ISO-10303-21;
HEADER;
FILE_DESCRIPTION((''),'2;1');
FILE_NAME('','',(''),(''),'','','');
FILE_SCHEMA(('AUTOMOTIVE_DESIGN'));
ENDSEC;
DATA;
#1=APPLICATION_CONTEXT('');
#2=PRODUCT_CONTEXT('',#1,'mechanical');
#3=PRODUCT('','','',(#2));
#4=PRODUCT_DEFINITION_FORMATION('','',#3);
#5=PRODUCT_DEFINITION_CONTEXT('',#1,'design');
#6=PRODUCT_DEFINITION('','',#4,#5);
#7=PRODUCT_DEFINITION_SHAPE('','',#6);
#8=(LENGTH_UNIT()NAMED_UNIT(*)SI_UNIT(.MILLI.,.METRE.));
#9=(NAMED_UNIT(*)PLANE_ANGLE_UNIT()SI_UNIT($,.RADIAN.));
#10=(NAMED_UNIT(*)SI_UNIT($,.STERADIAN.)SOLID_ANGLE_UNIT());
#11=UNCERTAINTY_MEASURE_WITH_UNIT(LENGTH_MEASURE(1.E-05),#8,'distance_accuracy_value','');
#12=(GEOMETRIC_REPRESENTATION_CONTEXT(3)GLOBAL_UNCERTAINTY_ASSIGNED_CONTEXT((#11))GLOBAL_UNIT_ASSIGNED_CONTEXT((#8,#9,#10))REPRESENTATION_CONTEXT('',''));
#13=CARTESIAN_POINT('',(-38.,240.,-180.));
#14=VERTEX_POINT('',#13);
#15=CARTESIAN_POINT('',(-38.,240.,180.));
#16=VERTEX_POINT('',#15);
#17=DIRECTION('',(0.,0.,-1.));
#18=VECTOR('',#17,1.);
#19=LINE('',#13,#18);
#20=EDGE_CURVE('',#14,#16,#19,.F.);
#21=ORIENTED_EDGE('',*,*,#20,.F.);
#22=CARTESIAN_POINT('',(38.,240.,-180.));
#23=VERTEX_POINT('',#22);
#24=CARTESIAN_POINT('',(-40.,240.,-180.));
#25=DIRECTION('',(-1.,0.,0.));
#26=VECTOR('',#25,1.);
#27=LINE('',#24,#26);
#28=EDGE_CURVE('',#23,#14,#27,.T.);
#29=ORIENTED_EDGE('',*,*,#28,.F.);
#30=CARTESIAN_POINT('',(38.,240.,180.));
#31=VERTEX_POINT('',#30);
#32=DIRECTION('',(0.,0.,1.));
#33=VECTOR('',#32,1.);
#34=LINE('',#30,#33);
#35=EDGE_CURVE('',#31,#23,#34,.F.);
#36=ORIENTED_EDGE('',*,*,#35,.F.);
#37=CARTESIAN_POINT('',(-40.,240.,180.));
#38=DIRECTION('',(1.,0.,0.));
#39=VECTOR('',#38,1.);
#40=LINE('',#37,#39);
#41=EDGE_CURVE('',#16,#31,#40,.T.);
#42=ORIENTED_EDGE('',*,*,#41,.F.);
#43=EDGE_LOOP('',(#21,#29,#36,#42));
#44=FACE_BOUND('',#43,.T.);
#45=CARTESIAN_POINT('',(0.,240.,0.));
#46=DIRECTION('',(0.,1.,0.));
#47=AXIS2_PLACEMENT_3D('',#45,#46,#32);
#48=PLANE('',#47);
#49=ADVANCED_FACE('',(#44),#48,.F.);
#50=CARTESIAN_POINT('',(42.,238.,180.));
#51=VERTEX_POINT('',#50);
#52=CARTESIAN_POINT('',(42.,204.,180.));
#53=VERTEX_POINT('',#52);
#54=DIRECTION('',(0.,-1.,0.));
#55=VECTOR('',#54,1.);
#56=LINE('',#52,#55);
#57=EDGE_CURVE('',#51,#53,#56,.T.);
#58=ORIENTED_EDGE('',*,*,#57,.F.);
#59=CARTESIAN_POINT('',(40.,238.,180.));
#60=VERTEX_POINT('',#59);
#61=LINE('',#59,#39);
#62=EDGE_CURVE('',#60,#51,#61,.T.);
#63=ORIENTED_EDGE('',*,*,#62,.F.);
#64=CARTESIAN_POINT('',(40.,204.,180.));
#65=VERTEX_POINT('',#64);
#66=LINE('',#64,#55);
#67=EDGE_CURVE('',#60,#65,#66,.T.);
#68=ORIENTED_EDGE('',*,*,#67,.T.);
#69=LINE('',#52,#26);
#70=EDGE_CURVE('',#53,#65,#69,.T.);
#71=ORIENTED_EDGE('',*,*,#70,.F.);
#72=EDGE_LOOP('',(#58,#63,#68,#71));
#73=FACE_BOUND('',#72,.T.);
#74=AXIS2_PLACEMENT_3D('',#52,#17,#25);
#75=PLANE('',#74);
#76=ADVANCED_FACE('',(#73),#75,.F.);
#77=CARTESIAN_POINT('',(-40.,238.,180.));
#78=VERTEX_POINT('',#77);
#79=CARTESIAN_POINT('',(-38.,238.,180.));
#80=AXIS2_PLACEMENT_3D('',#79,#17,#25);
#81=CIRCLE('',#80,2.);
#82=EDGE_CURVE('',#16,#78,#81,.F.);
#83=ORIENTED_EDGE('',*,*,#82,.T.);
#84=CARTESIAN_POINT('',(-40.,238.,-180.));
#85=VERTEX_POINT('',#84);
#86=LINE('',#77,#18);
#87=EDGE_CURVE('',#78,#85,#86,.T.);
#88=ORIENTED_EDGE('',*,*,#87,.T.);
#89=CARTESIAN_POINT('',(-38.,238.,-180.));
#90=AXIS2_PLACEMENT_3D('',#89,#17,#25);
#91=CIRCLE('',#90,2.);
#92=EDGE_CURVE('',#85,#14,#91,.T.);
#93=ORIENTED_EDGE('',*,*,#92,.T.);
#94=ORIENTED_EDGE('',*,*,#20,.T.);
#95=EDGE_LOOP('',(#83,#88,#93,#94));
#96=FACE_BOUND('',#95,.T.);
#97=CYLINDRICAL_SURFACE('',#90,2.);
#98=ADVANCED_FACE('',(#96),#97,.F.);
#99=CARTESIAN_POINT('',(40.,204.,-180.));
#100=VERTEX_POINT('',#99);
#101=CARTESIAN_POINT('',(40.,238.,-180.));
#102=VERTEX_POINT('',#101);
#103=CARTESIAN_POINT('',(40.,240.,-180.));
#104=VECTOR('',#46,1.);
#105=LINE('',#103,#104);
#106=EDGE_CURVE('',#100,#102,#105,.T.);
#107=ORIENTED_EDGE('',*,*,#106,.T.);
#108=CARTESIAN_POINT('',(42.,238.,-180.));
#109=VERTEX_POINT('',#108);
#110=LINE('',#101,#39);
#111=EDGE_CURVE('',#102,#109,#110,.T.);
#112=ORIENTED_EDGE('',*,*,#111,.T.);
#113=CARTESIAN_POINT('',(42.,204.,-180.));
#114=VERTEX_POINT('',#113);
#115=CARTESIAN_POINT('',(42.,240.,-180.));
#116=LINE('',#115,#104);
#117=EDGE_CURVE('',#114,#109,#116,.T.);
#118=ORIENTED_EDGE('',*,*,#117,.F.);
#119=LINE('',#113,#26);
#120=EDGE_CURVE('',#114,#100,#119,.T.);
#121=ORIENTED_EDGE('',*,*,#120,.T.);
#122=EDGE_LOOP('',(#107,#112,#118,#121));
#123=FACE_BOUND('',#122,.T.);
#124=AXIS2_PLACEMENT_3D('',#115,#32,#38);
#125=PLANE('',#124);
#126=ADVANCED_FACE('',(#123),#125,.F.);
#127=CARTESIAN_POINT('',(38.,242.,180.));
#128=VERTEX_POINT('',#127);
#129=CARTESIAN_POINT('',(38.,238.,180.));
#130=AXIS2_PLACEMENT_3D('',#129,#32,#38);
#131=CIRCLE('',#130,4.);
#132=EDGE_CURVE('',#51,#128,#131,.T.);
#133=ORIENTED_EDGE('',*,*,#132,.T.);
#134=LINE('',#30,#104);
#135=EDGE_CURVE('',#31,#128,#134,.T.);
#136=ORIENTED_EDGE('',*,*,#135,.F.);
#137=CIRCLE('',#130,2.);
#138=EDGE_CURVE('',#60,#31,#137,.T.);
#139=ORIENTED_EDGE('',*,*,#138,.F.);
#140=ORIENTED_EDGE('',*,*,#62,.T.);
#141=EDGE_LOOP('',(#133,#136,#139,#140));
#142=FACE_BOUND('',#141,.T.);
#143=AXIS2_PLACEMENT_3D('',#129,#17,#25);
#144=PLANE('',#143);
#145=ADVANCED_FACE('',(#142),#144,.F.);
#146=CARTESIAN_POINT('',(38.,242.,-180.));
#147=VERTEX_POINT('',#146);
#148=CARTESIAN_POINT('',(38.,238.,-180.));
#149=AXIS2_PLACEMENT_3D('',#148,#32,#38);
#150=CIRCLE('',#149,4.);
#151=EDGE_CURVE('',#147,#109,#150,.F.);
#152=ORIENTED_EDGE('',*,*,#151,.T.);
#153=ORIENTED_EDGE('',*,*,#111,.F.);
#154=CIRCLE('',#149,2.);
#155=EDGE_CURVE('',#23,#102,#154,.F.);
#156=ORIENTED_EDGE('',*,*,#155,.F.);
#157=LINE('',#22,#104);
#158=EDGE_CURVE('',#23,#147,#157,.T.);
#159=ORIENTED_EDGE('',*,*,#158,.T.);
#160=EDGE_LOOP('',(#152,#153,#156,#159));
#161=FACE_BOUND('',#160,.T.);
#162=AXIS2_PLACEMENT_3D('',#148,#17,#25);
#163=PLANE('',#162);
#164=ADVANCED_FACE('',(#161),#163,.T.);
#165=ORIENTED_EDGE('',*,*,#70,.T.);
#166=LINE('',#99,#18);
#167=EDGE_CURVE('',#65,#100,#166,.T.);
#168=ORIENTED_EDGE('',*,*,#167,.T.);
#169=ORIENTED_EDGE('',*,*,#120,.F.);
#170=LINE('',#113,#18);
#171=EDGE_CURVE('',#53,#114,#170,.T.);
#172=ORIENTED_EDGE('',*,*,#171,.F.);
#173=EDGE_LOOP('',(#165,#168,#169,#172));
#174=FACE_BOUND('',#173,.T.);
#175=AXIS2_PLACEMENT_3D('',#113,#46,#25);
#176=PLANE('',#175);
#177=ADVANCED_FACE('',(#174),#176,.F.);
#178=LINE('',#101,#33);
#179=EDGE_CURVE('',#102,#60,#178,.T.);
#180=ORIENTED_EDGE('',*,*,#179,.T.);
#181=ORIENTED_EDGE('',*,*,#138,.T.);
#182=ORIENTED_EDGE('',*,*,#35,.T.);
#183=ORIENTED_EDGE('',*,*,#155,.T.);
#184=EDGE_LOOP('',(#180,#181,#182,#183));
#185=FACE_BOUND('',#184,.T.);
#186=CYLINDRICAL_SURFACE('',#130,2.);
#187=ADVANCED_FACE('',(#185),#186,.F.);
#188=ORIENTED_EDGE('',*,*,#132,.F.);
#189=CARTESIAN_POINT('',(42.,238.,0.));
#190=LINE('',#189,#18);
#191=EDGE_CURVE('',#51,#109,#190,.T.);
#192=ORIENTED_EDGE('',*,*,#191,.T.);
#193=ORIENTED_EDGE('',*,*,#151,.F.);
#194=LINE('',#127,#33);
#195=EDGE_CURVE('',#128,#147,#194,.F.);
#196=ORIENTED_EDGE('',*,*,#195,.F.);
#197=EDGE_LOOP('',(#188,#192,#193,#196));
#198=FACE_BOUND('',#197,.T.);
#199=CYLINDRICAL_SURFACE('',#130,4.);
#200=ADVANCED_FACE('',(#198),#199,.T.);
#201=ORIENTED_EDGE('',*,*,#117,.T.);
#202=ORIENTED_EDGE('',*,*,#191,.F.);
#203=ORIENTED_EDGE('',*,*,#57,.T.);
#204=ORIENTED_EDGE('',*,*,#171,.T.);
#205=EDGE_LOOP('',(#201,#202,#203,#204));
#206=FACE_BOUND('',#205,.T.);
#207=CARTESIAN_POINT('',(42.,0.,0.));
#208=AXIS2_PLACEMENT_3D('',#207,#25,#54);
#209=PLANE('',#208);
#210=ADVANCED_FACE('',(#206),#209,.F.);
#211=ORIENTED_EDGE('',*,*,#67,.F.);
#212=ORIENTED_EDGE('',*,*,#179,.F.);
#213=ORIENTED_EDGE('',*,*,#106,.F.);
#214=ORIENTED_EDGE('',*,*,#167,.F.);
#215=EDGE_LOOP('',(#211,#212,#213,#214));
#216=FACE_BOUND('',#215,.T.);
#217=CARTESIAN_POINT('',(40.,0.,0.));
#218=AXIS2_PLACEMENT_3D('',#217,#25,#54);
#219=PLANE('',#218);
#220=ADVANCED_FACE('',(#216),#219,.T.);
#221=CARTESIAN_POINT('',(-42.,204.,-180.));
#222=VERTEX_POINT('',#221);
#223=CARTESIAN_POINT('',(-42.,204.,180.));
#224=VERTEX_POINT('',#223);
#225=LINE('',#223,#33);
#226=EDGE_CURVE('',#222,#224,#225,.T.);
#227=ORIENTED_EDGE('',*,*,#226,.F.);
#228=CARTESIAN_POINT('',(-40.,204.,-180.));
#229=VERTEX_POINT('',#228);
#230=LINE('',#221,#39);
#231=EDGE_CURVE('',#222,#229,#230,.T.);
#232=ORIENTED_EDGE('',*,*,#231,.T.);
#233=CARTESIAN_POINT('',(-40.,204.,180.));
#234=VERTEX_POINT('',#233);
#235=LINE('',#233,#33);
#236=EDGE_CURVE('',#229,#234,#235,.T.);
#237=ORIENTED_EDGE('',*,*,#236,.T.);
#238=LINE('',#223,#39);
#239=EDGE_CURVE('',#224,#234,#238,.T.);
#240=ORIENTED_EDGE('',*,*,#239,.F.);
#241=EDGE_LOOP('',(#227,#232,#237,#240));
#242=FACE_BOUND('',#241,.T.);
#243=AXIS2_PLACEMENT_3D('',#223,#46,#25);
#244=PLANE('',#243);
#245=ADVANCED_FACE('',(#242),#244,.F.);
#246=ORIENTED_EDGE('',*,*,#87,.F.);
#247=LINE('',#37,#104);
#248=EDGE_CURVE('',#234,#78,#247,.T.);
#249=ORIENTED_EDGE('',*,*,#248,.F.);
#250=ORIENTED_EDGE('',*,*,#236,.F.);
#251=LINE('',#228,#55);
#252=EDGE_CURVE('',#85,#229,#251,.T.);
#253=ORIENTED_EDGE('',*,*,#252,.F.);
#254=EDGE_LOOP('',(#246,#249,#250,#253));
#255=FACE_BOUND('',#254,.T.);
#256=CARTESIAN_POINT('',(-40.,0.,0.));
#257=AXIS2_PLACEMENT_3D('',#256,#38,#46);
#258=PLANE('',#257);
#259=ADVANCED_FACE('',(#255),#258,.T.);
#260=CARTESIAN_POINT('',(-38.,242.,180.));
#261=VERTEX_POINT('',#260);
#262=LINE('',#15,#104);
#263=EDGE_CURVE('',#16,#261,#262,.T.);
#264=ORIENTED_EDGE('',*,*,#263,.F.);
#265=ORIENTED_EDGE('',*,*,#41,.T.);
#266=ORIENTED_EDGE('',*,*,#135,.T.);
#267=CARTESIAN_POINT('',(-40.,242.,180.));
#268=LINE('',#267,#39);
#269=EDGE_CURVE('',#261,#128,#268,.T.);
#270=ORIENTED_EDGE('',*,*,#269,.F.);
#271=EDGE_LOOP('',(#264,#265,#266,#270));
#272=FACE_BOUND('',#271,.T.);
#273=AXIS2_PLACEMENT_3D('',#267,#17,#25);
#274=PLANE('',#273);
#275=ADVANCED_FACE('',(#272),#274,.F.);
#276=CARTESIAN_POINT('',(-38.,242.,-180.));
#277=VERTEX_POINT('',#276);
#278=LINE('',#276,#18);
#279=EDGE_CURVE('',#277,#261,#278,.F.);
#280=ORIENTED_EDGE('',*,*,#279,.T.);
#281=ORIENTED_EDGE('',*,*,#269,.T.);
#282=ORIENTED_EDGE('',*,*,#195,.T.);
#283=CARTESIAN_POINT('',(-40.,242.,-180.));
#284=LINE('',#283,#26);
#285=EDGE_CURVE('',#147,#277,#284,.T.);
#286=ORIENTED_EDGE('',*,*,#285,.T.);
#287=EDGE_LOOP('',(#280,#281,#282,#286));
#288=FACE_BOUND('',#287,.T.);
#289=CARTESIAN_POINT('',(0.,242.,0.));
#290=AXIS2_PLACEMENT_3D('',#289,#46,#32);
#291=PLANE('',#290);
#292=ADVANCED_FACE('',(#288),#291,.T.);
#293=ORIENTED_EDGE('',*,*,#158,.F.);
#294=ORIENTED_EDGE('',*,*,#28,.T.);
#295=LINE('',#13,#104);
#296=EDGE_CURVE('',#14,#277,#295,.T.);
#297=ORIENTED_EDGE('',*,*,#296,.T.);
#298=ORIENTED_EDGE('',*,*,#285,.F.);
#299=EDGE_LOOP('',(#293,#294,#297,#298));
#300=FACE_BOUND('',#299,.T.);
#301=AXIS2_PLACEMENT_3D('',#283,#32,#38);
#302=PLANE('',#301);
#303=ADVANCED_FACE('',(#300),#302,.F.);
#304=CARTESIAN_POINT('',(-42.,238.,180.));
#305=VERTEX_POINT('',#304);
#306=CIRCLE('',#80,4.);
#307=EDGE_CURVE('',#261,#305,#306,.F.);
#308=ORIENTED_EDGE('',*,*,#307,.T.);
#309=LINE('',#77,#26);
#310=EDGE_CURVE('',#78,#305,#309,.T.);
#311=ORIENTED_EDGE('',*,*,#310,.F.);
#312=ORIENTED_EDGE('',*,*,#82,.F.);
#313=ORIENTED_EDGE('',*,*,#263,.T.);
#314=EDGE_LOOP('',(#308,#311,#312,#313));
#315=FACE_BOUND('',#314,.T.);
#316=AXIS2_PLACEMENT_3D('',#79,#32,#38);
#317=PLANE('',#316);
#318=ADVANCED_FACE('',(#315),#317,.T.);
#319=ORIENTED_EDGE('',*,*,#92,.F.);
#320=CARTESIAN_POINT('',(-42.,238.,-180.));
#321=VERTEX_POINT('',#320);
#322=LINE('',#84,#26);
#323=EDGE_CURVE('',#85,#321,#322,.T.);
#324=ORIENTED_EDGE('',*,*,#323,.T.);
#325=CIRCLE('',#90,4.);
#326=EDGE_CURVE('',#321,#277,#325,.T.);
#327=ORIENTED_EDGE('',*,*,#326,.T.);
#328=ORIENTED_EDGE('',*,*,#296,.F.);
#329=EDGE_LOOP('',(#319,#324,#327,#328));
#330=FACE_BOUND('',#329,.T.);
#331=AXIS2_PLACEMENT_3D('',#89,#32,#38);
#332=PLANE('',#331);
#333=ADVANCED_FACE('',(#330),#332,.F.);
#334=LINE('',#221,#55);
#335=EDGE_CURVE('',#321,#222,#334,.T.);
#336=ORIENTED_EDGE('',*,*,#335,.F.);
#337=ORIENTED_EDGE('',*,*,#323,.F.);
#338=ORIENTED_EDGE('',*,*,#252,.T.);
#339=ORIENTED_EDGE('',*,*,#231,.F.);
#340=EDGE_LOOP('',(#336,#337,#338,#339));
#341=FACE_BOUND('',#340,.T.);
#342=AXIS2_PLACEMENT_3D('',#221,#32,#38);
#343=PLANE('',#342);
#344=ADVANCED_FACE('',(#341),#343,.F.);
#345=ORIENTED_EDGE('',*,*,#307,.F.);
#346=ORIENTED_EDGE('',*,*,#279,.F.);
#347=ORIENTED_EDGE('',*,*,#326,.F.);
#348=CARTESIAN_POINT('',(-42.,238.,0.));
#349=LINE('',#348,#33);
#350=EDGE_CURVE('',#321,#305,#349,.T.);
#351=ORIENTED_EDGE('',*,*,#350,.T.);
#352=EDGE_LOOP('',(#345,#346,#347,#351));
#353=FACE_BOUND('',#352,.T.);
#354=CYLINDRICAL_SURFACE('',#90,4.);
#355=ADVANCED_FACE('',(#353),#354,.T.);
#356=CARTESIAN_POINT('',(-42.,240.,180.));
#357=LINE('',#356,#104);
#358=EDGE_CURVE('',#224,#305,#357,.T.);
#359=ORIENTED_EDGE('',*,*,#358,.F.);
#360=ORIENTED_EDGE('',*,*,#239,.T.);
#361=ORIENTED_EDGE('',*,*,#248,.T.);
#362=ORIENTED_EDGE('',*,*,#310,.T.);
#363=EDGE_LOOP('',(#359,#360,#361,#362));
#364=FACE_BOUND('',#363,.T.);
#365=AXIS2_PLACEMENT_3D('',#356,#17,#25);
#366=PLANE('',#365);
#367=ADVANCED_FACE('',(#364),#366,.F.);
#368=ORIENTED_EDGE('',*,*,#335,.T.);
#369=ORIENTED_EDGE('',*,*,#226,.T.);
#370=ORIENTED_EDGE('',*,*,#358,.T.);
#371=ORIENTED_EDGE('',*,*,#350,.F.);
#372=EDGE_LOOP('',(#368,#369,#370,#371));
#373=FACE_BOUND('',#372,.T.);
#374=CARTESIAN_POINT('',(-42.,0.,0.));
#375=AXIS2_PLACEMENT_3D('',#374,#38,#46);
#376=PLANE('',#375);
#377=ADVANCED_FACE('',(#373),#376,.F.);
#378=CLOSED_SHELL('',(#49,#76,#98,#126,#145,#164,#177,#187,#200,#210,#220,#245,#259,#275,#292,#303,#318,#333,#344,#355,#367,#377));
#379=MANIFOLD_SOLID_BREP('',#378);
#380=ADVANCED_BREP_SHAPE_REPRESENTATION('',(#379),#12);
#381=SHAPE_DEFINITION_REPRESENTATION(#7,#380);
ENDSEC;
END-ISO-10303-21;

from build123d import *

# Parameters (mm, degrees)
SKETCH1_W                      = 80
SKETCH1_H                      = 360
BASE_FLANGE1_DEPTH             = 2
EDGE_FLANGE1_STRIP_W           = 12
EDGE_FLANGE1_STRIP_H           = 2
EDGE_FLANGE1_STRIP_CUT_DEPTH   = 360
EDGE_FLANGE1_STRIP_2_W         = 12
EDGE_FLANGE1_STRIP_2_H         = 2
EDGE_FLANGE1_STRIP_CUT_2_DEPTH = 360
EDGE_FLANGE1_DEPTH             = 360
EDGE_FLANGE1_BEND_DEPTH        = 360


# Sheet-metal steps are written as plain solids
with BuildPart() as part:
    # Sketch1 → Base-Flange1 (new body)
    with BuildSketch(Plane(origin=(0, 240, 0), x_dir=(1, 0, 0), z_dir=(0, 1, 0))):
        Rectangle(SKETCH1_W, SKETCH1_H)
    extrude(amount=BASE_FLANGE1_DEPTH)

    # Edge-Flange1 strip (across the edge) → Edge-Flange1 strip cut (cut)
    with BuildSketch(Plane(origin=(40, 240, -180), x_dir=(-1, 0, 0), z_dir=(0, 0, 1))):
        with Locations((-4, -1)):
            Rectangle(EDGE_FLANGE1_STRIP_W, EDGE_FLANGE1_STRIP_H)
    extrude(amount=EDGE_FLANGE1_STRIP_CUT_DEPTH, mode=Mode.SUBTRACT)

    # Edge-Flange1 strip 2 (across the edge) → Edge-Flange1 strip cut 2 (cut)
    with BuildSketch(Plane(origin=(-40, 240, 180), x_dir=(1, 0, 0), z_dir=(0, 0, -1))):
        with Locations((-4, -1)):
            Rectangle(EDGE_FLANGE1_STRIP_2_W, EDGE_FLANGE1_STRIP_2_H)
    extrude(amount=EDGE_FLANGE1_STRIP_CUT_2_DEPTH, mode=Mode.SUBTRACT)

    # Edge-Flange1 section (across the edge) → Edge-Flange1 (add)
    with BuildSketch(Plane(origin=(40, 240, -180), x_dir=(-1, 0, 0), z_dir=(0, 0, 1))):
        with BuildLine():
            Line((-2, 2), (-2, 36))
            Line((-2, 36), (0, 36))
            Line((0, 36), (0, 2))
            ThreePointArc((0, 2), (0.585786438, 0.585786438), (2, 0))
            Line((2, 0), (2, -2))
            ThreePointArc((2, -2), (-0.828427125, -0.828427125), (-2, 2))
        make_face()
    extrude(amount=EDGE_FLANGE1_DEPTH)

    # Edge-Flange1 section 2 (across the edge) → Edge-Flange1 bend (add)
    with BuildSketch(Plane(origin=(-40, 240, 180), x_dir=(1, 0, 0), z_dir=(0, 0, -1))):
        with BuildLine():
            Line((-2, 2), (-2, 36))
            Line((-2, 36), (0, 36))
            Line((0, 36), (0, 2))
            ThreePointArc((0, 2), (0.585786438, 0.585786438), (2, 0))
            Line((2, 0), (2, -2))
            ThreePointArc((2, -2), (-0.828427125, -0.828427125), (-2, 2))
        make_face()
    extrude(amount=EDGE_FLANGE1_BEND_DEPTH)


solid = part.part
